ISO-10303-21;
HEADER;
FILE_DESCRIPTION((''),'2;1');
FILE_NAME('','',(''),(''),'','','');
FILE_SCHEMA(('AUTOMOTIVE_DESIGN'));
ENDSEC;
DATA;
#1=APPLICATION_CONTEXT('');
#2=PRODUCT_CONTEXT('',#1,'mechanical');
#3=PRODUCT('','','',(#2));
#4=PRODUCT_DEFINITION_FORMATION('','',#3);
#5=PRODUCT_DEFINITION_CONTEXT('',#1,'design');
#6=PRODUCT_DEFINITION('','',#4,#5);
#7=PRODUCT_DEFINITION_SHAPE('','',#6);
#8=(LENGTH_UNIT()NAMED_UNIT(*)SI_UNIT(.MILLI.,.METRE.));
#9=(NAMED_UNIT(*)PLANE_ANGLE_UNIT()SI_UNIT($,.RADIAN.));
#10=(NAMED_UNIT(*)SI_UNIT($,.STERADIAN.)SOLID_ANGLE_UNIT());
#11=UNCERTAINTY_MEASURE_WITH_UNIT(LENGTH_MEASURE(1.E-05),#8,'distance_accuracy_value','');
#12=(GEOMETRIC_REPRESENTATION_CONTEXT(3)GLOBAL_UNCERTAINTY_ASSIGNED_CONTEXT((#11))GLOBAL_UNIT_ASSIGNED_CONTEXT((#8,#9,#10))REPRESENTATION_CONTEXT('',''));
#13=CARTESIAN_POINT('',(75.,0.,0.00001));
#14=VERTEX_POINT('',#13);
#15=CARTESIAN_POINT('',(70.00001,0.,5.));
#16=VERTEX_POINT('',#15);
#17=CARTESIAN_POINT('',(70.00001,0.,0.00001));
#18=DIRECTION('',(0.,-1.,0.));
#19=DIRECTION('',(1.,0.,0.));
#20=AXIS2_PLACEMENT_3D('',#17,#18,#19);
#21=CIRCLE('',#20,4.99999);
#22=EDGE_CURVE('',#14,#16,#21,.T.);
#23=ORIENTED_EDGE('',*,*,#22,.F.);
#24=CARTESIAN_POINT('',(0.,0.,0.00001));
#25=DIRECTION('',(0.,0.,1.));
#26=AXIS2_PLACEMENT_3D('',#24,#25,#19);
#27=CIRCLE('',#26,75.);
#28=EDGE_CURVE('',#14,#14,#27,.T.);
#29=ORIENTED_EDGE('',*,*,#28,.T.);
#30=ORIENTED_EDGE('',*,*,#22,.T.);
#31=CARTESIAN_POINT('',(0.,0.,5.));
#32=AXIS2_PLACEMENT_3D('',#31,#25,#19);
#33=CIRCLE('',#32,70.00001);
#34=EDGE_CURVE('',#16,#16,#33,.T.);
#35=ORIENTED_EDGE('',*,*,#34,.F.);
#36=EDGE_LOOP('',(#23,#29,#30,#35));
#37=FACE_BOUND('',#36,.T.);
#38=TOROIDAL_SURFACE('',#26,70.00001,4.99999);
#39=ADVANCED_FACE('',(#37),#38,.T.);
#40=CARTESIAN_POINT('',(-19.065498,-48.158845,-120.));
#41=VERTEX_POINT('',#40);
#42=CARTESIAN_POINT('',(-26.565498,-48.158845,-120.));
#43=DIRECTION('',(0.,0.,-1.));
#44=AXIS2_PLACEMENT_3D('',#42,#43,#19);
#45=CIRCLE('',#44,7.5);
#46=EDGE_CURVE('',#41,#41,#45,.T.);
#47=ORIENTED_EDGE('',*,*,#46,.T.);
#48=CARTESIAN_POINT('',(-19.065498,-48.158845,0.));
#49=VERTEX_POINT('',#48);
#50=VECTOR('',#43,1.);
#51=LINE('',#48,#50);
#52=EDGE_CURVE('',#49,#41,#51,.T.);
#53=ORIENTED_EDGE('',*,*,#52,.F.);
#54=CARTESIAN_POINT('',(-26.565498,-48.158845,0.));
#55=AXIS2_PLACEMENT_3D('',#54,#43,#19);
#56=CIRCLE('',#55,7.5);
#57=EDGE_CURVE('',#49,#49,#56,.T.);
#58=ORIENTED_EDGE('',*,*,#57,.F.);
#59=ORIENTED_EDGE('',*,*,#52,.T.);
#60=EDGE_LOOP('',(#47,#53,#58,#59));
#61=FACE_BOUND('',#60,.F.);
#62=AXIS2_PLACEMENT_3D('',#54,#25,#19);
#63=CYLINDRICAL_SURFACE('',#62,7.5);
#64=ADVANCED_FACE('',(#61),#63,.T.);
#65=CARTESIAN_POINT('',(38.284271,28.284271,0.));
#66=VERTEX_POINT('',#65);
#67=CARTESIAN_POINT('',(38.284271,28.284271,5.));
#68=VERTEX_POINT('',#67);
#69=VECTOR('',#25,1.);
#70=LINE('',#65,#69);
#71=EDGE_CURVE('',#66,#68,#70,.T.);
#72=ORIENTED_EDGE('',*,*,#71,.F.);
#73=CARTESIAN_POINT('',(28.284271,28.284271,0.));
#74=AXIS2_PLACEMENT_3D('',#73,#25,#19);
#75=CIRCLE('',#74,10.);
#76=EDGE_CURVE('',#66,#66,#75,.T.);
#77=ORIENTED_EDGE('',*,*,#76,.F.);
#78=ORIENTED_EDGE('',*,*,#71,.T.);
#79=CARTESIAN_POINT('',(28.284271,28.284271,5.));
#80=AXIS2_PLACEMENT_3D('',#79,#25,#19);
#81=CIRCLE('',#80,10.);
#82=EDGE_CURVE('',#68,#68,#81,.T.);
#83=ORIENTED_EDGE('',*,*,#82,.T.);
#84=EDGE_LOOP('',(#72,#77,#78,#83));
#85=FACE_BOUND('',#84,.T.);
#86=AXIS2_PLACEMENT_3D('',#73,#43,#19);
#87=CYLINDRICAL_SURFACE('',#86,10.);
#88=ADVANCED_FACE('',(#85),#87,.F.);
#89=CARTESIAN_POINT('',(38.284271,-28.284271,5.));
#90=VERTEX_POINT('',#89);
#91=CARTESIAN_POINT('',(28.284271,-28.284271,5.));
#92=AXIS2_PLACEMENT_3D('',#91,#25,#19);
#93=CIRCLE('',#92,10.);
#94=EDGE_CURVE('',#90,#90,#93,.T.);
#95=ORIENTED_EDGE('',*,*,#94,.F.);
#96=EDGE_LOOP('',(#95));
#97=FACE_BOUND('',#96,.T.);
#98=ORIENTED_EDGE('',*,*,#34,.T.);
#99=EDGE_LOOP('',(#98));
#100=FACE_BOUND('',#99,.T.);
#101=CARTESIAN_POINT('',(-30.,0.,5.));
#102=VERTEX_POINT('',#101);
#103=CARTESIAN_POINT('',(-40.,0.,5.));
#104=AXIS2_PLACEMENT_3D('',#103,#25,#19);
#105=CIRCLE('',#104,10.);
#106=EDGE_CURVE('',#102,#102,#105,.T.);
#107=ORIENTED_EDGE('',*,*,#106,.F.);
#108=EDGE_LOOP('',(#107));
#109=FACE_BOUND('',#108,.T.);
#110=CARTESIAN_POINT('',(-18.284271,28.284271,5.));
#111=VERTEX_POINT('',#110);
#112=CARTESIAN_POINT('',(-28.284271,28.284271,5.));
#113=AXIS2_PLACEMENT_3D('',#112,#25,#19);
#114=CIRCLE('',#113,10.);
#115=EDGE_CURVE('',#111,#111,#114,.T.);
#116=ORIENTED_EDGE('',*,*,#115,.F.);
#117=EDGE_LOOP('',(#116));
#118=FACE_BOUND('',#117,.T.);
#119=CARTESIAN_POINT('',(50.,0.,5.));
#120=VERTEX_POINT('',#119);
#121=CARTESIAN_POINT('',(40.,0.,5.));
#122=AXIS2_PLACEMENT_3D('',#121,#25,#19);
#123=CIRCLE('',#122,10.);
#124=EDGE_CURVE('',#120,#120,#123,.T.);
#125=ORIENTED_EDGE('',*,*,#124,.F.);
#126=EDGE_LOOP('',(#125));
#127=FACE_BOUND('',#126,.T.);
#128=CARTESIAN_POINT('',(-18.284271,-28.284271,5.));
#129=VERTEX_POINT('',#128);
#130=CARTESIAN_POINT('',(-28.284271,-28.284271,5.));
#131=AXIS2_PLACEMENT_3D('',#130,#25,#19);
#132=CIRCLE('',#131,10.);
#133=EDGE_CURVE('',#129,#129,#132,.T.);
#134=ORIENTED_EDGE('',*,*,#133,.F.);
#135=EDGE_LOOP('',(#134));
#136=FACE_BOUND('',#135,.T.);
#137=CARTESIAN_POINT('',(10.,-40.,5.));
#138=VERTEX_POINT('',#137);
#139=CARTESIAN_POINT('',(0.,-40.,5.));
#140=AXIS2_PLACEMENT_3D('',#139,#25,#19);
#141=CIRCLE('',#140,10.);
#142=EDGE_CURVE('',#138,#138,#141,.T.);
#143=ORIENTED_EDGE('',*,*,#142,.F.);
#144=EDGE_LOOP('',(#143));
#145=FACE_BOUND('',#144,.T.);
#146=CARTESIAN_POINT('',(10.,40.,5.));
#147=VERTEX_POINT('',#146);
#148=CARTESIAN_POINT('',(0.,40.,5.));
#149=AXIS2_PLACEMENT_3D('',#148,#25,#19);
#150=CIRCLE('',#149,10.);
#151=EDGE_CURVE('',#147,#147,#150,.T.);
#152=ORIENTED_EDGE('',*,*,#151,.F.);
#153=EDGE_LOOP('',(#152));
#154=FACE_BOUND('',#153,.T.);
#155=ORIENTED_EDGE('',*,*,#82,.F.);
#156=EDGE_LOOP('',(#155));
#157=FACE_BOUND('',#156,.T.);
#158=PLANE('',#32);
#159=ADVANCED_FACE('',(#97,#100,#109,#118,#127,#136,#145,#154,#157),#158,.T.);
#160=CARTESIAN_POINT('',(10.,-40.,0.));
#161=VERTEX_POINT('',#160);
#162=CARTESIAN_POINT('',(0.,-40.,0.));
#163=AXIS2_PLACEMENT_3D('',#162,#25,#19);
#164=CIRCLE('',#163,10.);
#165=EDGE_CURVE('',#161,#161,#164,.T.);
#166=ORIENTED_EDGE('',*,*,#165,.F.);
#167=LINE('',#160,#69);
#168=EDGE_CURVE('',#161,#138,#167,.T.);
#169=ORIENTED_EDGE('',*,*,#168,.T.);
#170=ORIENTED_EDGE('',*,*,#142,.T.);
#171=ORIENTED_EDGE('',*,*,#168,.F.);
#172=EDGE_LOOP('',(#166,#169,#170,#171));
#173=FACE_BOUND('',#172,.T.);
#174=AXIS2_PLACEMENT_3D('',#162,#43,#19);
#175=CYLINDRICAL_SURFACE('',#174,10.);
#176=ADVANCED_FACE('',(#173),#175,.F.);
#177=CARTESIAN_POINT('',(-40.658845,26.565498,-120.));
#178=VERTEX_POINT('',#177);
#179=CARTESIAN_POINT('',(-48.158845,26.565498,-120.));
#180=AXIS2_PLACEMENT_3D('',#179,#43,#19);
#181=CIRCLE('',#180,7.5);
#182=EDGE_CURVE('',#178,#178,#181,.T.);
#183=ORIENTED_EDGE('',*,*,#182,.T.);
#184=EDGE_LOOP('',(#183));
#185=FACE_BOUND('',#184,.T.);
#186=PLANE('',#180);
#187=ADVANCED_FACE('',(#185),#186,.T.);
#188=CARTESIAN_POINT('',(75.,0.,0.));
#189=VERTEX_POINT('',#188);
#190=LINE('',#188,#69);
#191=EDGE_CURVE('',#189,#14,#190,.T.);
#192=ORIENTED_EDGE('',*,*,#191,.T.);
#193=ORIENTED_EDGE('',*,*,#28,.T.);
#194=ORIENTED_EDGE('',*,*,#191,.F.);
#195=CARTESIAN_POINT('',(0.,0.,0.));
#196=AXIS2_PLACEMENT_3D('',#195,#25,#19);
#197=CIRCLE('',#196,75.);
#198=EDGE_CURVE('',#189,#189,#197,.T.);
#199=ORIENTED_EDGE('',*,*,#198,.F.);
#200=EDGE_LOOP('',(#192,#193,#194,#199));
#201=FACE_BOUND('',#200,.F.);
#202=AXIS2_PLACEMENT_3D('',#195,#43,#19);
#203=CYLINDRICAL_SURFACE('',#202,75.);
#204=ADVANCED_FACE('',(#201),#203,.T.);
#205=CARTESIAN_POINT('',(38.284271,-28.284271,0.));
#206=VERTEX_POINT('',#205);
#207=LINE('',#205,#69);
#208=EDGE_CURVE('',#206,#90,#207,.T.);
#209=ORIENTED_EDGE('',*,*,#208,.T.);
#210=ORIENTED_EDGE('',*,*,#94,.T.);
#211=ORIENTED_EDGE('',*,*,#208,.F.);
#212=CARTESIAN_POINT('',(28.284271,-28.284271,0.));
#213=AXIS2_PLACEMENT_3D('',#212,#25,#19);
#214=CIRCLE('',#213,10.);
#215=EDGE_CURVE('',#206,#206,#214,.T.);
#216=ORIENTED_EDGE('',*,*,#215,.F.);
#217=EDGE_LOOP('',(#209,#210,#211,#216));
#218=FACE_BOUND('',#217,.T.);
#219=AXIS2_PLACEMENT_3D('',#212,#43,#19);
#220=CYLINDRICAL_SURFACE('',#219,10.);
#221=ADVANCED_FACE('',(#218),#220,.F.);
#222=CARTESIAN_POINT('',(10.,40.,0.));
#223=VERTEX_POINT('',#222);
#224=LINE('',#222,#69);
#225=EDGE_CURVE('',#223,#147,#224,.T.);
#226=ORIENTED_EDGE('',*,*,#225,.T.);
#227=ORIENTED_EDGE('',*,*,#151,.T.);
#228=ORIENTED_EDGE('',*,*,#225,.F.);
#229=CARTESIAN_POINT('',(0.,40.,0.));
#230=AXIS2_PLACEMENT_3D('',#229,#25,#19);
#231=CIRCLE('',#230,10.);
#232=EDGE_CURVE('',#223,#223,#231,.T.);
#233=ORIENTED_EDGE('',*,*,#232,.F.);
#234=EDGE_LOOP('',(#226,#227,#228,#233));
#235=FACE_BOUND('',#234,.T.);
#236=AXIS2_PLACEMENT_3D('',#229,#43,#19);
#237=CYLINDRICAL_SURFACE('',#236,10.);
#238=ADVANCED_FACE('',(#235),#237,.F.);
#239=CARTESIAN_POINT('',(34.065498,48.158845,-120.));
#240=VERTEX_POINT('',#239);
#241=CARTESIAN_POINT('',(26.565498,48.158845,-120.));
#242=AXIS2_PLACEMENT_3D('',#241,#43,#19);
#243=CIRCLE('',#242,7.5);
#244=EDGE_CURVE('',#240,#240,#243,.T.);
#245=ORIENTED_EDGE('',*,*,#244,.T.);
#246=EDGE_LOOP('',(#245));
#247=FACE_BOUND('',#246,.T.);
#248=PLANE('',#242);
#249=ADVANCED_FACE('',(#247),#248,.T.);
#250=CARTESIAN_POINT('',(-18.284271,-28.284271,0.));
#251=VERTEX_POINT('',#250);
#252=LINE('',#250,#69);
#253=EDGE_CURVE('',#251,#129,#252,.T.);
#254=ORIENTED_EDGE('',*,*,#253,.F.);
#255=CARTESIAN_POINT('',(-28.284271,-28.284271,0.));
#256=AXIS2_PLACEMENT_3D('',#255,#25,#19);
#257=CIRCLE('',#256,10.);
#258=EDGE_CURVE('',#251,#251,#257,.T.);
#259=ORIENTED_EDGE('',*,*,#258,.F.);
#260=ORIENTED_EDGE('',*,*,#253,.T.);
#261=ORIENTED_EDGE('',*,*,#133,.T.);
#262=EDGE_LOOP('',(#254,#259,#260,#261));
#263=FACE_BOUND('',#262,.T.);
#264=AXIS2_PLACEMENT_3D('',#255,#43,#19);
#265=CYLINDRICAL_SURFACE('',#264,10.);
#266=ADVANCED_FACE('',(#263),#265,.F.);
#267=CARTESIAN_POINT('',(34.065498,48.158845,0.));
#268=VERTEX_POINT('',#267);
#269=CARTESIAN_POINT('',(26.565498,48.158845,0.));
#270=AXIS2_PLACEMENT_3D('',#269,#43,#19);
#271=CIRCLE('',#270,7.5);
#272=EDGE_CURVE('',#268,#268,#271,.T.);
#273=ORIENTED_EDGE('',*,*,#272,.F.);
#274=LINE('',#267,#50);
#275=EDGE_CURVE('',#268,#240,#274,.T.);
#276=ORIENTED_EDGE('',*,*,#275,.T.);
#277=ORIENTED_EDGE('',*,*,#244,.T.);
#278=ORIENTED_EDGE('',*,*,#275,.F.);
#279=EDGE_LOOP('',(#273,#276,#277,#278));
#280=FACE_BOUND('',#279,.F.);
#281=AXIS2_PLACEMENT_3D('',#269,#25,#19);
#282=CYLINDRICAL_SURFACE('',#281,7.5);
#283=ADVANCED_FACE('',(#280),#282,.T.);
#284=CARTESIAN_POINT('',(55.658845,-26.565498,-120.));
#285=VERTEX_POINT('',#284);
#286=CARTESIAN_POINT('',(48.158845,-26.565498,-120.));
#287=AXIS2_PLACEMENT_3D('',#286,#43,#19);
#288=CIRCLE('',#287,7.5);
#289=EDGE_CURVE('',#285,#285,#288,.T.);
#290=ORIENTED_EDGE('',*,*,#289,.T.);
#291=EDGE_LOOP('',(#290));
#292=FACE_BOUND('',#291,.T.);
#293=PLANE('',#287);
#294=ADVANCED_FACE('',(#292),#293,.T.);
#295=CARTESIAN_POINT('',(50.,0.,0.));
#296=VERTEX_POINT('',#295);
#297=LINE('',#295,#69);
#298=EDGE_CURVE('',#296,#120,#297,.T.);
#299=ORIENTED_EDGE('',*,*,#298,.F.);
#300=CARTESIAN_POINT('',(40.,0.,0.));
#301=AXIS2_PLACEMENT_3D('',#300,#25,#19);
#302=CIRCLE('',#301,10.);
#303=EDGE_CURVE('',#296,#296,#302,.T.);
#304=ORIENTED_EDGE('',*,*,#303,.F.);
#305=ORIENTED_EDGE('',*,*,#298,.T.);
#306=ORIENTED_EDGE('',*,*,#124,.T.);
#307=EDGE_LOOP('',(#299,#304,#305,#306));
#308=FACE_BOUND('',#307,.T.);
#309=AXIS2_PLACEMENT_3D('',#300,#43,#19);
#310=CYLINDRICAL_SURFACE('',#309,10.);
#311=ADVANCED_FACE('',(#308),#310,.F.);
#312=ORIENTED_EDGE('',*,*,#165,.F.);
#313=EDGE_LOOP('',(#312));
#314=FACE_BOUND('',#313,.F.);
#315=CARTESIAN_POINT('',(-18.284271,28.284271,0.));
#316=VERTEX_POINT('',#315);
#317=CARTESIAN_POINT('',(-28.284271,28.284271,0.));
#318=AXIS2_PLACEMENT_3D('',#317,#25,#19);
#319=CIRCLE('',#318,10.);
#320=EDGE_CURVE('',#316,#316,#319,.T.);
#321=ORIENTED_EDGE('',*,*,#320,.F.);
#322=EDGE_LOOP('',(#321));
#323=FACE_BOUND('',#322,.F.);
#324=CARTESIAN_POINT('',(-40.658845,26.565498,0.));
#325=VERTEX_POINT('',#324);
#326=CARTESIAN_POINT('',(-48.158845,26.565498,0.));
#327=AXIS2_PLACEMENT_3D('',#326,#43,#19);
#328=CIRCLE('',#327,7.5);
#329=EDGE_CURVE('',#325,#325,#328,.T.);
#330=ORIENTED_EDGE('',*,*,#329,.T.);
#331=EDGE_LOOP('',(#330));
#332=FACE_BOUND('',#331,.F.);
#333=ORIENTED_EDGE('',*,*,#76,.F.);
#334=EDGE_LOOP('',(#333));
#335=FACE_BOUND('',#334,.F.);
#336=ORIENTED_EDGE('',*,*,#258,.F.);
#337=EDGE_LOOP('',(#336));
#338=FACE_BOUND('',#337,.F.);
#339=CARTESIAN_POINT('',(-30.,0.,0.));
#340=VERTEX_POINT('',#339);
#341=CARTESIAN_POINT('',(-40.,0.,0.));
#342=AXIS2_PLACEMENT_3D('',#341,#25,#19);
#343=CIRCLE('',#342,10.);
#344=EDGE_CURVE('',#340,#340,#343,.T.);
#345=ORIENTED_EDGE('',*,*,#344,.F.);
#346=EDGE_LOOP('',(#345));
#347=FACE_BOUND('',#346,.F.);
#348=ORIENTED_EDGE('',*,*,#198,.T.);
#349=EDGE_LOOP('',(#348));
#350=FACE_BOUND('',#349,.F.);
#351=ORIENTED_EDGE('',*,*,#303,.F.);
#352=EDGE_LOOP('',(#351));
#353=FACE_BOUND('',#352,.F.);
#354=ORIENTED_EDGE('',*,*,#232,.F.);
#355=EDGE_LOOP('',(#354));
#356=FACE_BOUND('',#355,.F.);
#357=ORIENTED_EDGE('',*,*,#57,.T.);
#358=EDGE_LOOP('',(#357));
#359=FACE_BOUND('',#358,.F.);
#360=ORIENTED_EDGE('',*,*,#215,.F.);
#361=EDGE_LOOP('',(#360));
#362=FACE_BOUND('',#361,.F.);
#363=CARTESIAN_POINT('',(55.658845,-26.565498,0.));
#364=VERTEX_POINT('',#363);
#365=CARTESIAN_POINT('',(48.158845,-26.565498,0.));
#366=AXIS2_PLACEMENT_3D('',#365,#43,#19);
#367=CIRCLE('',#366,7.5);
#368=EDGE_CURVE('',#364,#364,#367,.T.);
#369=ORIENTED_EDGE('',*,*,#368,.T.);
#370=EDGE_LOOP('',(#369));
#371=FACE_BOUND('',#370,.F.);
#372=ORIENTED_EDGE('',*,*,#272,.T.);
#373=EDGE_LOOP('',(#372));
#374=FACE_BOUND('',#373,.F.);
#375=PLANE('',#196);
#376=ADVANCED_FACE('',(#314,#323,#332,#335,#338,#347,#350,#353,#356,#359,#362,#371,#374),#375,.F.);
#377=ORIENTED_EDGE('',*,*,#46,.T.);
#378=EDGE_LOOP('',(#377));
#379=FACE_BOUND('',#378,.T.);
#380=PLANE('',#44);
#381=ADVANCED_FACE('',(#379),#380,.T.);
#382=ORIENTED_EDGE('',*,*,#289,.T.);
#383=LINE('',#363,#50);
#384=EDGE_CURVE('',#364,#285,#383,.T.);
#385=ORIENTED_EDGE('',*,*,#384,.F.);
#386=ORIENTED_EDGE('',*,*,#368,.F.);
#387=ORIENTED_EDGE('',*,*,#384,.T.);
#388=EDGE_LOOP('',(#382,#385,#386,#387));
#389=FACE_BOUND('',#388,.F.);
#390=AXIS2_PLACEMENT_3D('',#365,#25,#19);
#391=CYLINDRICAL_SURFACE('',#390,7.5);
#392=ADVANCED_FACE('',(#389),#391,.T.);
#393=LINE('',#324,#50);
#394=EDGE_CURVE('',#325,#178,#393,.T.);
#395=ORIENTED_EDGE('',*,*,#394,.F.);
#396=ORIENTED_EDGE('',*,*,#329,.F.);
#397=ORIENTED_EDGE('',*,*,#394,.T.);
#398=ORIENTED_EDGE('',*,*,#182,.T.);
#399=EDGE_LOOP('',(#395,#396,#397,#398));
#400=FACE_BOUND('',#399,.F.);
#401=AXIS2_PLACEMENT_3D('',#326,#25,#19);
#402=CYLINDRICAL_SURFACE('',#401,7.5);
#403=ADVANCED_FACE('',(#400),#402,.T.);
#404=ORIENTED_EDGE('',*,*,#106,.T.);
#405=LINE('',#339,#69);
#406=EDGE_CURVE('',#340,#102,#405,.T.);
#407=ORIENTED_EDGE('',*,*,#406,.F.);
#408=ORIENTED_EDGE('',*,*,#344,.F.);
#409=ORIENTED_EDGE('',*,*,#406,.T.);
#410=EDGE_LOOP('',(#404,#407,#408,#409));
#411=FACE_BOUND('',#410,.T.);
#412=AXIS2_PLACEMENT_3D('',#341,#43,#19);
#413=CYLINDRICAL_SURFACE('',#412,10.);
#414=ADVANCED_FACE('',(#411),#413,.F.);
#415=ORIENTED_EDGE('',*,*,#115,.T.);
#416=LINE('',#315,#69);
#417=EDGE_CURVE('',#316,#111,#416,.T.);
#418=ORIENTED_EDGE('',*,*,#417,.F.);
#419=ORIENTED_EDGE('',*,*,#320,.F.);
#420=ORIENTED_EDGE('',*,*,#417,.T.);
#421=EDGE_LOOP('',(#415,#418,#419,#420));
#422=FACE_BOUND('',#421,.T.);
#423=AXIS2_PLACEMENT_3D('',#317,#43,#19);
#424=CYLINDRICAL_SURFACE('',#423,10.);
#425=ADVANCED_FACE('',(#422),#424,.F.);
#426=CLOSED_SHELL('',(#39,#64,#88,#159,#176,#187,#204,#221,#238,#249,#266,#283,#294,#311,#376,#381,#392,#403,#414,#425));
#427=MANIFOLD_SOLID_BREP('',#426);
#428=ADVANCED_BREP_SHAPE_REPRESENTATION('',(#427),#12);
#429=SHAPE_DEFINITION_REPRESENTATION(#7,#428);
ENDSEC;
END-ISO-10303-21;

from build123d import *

# Parameters (mm, degrees)
F0_R     = 75
F0_R_2   = 10
F1_DEPTH = 5
F2_R     = 4.99999
F3_R     = 7.5
F4_DEPTH = 120


# Not quite as in the source:
# - a fillet or chamfer is up to 0.001 mm smaller than in the source, because OpenCascade refuses the exact size


with BuildPart() as f1:
    # F0 (on Top) → F1 (new body)
    with BuildSketch(Plane.XY):
        Circle(F0_R)
        with Locations((-28.2842712475, -28.2842712475)):
            Circle(F0_R_2, mode=Mode.SUBTRACT)
        with Locations((0, -40)):
            Circle(F0_R_2, mode=Mode.SUBTRACT)
        with Locations((28.2842712475, -28.2842712475)):
            Circle(F0_R_2, mode=Mode.SUBTRACT)
        with Locations((-40, 0)):
            Circle(F0_R_2, mode=Mode.SUBTRACT)
        with Locations((-28.2842712475, 28.2842712475)):
            Circle(F0_R_2, mode=Mode.SUBTRACT)
        with Locations((28.2842712475, 28.2842712475)):
            Circle(F0_R_2, mode=Mode.SUBTRACT)
        with Locations((40, 0)):
            Circle(F0_R_2, mode=Mode.SUBTRACT)
        with Locations((0, 40)):
            Circle(F0_R_2, mode=Mode.SUBTRACT)
    extrude(amount=F1_DEPTH)

    # F2 (radius 5 in the source; OpenCascade refuses exactly that, so slightly less here)
    f2_edges = [f1.edges().sort_by_distance(p)[0] for p in [
        (-75, 0, 5),
    ]]
    fillet(f2_edges, radius=F2_R)

    # F3 (on face) → F4 (join)
    with BuildSketch(Plane(origin=(0, 0, 0), x_dir=(1, 0, 0), z_dir=(0, 0, -1))):
        with Locations((-26.565498142, 48.1588445508)):
            Circle(F3_R)
        with Locations((-48.1588445508, -26.565498142)):
            Circle(F3_R)
        with Locations((26.565498142, -48.1588445508)):
            Circle(F3_R)
        with Locations((48.1588445508, 26.565498142)):
            Circle(F3_R)
    extrude(amount=F4_DEPTH)


solid = f1.part
